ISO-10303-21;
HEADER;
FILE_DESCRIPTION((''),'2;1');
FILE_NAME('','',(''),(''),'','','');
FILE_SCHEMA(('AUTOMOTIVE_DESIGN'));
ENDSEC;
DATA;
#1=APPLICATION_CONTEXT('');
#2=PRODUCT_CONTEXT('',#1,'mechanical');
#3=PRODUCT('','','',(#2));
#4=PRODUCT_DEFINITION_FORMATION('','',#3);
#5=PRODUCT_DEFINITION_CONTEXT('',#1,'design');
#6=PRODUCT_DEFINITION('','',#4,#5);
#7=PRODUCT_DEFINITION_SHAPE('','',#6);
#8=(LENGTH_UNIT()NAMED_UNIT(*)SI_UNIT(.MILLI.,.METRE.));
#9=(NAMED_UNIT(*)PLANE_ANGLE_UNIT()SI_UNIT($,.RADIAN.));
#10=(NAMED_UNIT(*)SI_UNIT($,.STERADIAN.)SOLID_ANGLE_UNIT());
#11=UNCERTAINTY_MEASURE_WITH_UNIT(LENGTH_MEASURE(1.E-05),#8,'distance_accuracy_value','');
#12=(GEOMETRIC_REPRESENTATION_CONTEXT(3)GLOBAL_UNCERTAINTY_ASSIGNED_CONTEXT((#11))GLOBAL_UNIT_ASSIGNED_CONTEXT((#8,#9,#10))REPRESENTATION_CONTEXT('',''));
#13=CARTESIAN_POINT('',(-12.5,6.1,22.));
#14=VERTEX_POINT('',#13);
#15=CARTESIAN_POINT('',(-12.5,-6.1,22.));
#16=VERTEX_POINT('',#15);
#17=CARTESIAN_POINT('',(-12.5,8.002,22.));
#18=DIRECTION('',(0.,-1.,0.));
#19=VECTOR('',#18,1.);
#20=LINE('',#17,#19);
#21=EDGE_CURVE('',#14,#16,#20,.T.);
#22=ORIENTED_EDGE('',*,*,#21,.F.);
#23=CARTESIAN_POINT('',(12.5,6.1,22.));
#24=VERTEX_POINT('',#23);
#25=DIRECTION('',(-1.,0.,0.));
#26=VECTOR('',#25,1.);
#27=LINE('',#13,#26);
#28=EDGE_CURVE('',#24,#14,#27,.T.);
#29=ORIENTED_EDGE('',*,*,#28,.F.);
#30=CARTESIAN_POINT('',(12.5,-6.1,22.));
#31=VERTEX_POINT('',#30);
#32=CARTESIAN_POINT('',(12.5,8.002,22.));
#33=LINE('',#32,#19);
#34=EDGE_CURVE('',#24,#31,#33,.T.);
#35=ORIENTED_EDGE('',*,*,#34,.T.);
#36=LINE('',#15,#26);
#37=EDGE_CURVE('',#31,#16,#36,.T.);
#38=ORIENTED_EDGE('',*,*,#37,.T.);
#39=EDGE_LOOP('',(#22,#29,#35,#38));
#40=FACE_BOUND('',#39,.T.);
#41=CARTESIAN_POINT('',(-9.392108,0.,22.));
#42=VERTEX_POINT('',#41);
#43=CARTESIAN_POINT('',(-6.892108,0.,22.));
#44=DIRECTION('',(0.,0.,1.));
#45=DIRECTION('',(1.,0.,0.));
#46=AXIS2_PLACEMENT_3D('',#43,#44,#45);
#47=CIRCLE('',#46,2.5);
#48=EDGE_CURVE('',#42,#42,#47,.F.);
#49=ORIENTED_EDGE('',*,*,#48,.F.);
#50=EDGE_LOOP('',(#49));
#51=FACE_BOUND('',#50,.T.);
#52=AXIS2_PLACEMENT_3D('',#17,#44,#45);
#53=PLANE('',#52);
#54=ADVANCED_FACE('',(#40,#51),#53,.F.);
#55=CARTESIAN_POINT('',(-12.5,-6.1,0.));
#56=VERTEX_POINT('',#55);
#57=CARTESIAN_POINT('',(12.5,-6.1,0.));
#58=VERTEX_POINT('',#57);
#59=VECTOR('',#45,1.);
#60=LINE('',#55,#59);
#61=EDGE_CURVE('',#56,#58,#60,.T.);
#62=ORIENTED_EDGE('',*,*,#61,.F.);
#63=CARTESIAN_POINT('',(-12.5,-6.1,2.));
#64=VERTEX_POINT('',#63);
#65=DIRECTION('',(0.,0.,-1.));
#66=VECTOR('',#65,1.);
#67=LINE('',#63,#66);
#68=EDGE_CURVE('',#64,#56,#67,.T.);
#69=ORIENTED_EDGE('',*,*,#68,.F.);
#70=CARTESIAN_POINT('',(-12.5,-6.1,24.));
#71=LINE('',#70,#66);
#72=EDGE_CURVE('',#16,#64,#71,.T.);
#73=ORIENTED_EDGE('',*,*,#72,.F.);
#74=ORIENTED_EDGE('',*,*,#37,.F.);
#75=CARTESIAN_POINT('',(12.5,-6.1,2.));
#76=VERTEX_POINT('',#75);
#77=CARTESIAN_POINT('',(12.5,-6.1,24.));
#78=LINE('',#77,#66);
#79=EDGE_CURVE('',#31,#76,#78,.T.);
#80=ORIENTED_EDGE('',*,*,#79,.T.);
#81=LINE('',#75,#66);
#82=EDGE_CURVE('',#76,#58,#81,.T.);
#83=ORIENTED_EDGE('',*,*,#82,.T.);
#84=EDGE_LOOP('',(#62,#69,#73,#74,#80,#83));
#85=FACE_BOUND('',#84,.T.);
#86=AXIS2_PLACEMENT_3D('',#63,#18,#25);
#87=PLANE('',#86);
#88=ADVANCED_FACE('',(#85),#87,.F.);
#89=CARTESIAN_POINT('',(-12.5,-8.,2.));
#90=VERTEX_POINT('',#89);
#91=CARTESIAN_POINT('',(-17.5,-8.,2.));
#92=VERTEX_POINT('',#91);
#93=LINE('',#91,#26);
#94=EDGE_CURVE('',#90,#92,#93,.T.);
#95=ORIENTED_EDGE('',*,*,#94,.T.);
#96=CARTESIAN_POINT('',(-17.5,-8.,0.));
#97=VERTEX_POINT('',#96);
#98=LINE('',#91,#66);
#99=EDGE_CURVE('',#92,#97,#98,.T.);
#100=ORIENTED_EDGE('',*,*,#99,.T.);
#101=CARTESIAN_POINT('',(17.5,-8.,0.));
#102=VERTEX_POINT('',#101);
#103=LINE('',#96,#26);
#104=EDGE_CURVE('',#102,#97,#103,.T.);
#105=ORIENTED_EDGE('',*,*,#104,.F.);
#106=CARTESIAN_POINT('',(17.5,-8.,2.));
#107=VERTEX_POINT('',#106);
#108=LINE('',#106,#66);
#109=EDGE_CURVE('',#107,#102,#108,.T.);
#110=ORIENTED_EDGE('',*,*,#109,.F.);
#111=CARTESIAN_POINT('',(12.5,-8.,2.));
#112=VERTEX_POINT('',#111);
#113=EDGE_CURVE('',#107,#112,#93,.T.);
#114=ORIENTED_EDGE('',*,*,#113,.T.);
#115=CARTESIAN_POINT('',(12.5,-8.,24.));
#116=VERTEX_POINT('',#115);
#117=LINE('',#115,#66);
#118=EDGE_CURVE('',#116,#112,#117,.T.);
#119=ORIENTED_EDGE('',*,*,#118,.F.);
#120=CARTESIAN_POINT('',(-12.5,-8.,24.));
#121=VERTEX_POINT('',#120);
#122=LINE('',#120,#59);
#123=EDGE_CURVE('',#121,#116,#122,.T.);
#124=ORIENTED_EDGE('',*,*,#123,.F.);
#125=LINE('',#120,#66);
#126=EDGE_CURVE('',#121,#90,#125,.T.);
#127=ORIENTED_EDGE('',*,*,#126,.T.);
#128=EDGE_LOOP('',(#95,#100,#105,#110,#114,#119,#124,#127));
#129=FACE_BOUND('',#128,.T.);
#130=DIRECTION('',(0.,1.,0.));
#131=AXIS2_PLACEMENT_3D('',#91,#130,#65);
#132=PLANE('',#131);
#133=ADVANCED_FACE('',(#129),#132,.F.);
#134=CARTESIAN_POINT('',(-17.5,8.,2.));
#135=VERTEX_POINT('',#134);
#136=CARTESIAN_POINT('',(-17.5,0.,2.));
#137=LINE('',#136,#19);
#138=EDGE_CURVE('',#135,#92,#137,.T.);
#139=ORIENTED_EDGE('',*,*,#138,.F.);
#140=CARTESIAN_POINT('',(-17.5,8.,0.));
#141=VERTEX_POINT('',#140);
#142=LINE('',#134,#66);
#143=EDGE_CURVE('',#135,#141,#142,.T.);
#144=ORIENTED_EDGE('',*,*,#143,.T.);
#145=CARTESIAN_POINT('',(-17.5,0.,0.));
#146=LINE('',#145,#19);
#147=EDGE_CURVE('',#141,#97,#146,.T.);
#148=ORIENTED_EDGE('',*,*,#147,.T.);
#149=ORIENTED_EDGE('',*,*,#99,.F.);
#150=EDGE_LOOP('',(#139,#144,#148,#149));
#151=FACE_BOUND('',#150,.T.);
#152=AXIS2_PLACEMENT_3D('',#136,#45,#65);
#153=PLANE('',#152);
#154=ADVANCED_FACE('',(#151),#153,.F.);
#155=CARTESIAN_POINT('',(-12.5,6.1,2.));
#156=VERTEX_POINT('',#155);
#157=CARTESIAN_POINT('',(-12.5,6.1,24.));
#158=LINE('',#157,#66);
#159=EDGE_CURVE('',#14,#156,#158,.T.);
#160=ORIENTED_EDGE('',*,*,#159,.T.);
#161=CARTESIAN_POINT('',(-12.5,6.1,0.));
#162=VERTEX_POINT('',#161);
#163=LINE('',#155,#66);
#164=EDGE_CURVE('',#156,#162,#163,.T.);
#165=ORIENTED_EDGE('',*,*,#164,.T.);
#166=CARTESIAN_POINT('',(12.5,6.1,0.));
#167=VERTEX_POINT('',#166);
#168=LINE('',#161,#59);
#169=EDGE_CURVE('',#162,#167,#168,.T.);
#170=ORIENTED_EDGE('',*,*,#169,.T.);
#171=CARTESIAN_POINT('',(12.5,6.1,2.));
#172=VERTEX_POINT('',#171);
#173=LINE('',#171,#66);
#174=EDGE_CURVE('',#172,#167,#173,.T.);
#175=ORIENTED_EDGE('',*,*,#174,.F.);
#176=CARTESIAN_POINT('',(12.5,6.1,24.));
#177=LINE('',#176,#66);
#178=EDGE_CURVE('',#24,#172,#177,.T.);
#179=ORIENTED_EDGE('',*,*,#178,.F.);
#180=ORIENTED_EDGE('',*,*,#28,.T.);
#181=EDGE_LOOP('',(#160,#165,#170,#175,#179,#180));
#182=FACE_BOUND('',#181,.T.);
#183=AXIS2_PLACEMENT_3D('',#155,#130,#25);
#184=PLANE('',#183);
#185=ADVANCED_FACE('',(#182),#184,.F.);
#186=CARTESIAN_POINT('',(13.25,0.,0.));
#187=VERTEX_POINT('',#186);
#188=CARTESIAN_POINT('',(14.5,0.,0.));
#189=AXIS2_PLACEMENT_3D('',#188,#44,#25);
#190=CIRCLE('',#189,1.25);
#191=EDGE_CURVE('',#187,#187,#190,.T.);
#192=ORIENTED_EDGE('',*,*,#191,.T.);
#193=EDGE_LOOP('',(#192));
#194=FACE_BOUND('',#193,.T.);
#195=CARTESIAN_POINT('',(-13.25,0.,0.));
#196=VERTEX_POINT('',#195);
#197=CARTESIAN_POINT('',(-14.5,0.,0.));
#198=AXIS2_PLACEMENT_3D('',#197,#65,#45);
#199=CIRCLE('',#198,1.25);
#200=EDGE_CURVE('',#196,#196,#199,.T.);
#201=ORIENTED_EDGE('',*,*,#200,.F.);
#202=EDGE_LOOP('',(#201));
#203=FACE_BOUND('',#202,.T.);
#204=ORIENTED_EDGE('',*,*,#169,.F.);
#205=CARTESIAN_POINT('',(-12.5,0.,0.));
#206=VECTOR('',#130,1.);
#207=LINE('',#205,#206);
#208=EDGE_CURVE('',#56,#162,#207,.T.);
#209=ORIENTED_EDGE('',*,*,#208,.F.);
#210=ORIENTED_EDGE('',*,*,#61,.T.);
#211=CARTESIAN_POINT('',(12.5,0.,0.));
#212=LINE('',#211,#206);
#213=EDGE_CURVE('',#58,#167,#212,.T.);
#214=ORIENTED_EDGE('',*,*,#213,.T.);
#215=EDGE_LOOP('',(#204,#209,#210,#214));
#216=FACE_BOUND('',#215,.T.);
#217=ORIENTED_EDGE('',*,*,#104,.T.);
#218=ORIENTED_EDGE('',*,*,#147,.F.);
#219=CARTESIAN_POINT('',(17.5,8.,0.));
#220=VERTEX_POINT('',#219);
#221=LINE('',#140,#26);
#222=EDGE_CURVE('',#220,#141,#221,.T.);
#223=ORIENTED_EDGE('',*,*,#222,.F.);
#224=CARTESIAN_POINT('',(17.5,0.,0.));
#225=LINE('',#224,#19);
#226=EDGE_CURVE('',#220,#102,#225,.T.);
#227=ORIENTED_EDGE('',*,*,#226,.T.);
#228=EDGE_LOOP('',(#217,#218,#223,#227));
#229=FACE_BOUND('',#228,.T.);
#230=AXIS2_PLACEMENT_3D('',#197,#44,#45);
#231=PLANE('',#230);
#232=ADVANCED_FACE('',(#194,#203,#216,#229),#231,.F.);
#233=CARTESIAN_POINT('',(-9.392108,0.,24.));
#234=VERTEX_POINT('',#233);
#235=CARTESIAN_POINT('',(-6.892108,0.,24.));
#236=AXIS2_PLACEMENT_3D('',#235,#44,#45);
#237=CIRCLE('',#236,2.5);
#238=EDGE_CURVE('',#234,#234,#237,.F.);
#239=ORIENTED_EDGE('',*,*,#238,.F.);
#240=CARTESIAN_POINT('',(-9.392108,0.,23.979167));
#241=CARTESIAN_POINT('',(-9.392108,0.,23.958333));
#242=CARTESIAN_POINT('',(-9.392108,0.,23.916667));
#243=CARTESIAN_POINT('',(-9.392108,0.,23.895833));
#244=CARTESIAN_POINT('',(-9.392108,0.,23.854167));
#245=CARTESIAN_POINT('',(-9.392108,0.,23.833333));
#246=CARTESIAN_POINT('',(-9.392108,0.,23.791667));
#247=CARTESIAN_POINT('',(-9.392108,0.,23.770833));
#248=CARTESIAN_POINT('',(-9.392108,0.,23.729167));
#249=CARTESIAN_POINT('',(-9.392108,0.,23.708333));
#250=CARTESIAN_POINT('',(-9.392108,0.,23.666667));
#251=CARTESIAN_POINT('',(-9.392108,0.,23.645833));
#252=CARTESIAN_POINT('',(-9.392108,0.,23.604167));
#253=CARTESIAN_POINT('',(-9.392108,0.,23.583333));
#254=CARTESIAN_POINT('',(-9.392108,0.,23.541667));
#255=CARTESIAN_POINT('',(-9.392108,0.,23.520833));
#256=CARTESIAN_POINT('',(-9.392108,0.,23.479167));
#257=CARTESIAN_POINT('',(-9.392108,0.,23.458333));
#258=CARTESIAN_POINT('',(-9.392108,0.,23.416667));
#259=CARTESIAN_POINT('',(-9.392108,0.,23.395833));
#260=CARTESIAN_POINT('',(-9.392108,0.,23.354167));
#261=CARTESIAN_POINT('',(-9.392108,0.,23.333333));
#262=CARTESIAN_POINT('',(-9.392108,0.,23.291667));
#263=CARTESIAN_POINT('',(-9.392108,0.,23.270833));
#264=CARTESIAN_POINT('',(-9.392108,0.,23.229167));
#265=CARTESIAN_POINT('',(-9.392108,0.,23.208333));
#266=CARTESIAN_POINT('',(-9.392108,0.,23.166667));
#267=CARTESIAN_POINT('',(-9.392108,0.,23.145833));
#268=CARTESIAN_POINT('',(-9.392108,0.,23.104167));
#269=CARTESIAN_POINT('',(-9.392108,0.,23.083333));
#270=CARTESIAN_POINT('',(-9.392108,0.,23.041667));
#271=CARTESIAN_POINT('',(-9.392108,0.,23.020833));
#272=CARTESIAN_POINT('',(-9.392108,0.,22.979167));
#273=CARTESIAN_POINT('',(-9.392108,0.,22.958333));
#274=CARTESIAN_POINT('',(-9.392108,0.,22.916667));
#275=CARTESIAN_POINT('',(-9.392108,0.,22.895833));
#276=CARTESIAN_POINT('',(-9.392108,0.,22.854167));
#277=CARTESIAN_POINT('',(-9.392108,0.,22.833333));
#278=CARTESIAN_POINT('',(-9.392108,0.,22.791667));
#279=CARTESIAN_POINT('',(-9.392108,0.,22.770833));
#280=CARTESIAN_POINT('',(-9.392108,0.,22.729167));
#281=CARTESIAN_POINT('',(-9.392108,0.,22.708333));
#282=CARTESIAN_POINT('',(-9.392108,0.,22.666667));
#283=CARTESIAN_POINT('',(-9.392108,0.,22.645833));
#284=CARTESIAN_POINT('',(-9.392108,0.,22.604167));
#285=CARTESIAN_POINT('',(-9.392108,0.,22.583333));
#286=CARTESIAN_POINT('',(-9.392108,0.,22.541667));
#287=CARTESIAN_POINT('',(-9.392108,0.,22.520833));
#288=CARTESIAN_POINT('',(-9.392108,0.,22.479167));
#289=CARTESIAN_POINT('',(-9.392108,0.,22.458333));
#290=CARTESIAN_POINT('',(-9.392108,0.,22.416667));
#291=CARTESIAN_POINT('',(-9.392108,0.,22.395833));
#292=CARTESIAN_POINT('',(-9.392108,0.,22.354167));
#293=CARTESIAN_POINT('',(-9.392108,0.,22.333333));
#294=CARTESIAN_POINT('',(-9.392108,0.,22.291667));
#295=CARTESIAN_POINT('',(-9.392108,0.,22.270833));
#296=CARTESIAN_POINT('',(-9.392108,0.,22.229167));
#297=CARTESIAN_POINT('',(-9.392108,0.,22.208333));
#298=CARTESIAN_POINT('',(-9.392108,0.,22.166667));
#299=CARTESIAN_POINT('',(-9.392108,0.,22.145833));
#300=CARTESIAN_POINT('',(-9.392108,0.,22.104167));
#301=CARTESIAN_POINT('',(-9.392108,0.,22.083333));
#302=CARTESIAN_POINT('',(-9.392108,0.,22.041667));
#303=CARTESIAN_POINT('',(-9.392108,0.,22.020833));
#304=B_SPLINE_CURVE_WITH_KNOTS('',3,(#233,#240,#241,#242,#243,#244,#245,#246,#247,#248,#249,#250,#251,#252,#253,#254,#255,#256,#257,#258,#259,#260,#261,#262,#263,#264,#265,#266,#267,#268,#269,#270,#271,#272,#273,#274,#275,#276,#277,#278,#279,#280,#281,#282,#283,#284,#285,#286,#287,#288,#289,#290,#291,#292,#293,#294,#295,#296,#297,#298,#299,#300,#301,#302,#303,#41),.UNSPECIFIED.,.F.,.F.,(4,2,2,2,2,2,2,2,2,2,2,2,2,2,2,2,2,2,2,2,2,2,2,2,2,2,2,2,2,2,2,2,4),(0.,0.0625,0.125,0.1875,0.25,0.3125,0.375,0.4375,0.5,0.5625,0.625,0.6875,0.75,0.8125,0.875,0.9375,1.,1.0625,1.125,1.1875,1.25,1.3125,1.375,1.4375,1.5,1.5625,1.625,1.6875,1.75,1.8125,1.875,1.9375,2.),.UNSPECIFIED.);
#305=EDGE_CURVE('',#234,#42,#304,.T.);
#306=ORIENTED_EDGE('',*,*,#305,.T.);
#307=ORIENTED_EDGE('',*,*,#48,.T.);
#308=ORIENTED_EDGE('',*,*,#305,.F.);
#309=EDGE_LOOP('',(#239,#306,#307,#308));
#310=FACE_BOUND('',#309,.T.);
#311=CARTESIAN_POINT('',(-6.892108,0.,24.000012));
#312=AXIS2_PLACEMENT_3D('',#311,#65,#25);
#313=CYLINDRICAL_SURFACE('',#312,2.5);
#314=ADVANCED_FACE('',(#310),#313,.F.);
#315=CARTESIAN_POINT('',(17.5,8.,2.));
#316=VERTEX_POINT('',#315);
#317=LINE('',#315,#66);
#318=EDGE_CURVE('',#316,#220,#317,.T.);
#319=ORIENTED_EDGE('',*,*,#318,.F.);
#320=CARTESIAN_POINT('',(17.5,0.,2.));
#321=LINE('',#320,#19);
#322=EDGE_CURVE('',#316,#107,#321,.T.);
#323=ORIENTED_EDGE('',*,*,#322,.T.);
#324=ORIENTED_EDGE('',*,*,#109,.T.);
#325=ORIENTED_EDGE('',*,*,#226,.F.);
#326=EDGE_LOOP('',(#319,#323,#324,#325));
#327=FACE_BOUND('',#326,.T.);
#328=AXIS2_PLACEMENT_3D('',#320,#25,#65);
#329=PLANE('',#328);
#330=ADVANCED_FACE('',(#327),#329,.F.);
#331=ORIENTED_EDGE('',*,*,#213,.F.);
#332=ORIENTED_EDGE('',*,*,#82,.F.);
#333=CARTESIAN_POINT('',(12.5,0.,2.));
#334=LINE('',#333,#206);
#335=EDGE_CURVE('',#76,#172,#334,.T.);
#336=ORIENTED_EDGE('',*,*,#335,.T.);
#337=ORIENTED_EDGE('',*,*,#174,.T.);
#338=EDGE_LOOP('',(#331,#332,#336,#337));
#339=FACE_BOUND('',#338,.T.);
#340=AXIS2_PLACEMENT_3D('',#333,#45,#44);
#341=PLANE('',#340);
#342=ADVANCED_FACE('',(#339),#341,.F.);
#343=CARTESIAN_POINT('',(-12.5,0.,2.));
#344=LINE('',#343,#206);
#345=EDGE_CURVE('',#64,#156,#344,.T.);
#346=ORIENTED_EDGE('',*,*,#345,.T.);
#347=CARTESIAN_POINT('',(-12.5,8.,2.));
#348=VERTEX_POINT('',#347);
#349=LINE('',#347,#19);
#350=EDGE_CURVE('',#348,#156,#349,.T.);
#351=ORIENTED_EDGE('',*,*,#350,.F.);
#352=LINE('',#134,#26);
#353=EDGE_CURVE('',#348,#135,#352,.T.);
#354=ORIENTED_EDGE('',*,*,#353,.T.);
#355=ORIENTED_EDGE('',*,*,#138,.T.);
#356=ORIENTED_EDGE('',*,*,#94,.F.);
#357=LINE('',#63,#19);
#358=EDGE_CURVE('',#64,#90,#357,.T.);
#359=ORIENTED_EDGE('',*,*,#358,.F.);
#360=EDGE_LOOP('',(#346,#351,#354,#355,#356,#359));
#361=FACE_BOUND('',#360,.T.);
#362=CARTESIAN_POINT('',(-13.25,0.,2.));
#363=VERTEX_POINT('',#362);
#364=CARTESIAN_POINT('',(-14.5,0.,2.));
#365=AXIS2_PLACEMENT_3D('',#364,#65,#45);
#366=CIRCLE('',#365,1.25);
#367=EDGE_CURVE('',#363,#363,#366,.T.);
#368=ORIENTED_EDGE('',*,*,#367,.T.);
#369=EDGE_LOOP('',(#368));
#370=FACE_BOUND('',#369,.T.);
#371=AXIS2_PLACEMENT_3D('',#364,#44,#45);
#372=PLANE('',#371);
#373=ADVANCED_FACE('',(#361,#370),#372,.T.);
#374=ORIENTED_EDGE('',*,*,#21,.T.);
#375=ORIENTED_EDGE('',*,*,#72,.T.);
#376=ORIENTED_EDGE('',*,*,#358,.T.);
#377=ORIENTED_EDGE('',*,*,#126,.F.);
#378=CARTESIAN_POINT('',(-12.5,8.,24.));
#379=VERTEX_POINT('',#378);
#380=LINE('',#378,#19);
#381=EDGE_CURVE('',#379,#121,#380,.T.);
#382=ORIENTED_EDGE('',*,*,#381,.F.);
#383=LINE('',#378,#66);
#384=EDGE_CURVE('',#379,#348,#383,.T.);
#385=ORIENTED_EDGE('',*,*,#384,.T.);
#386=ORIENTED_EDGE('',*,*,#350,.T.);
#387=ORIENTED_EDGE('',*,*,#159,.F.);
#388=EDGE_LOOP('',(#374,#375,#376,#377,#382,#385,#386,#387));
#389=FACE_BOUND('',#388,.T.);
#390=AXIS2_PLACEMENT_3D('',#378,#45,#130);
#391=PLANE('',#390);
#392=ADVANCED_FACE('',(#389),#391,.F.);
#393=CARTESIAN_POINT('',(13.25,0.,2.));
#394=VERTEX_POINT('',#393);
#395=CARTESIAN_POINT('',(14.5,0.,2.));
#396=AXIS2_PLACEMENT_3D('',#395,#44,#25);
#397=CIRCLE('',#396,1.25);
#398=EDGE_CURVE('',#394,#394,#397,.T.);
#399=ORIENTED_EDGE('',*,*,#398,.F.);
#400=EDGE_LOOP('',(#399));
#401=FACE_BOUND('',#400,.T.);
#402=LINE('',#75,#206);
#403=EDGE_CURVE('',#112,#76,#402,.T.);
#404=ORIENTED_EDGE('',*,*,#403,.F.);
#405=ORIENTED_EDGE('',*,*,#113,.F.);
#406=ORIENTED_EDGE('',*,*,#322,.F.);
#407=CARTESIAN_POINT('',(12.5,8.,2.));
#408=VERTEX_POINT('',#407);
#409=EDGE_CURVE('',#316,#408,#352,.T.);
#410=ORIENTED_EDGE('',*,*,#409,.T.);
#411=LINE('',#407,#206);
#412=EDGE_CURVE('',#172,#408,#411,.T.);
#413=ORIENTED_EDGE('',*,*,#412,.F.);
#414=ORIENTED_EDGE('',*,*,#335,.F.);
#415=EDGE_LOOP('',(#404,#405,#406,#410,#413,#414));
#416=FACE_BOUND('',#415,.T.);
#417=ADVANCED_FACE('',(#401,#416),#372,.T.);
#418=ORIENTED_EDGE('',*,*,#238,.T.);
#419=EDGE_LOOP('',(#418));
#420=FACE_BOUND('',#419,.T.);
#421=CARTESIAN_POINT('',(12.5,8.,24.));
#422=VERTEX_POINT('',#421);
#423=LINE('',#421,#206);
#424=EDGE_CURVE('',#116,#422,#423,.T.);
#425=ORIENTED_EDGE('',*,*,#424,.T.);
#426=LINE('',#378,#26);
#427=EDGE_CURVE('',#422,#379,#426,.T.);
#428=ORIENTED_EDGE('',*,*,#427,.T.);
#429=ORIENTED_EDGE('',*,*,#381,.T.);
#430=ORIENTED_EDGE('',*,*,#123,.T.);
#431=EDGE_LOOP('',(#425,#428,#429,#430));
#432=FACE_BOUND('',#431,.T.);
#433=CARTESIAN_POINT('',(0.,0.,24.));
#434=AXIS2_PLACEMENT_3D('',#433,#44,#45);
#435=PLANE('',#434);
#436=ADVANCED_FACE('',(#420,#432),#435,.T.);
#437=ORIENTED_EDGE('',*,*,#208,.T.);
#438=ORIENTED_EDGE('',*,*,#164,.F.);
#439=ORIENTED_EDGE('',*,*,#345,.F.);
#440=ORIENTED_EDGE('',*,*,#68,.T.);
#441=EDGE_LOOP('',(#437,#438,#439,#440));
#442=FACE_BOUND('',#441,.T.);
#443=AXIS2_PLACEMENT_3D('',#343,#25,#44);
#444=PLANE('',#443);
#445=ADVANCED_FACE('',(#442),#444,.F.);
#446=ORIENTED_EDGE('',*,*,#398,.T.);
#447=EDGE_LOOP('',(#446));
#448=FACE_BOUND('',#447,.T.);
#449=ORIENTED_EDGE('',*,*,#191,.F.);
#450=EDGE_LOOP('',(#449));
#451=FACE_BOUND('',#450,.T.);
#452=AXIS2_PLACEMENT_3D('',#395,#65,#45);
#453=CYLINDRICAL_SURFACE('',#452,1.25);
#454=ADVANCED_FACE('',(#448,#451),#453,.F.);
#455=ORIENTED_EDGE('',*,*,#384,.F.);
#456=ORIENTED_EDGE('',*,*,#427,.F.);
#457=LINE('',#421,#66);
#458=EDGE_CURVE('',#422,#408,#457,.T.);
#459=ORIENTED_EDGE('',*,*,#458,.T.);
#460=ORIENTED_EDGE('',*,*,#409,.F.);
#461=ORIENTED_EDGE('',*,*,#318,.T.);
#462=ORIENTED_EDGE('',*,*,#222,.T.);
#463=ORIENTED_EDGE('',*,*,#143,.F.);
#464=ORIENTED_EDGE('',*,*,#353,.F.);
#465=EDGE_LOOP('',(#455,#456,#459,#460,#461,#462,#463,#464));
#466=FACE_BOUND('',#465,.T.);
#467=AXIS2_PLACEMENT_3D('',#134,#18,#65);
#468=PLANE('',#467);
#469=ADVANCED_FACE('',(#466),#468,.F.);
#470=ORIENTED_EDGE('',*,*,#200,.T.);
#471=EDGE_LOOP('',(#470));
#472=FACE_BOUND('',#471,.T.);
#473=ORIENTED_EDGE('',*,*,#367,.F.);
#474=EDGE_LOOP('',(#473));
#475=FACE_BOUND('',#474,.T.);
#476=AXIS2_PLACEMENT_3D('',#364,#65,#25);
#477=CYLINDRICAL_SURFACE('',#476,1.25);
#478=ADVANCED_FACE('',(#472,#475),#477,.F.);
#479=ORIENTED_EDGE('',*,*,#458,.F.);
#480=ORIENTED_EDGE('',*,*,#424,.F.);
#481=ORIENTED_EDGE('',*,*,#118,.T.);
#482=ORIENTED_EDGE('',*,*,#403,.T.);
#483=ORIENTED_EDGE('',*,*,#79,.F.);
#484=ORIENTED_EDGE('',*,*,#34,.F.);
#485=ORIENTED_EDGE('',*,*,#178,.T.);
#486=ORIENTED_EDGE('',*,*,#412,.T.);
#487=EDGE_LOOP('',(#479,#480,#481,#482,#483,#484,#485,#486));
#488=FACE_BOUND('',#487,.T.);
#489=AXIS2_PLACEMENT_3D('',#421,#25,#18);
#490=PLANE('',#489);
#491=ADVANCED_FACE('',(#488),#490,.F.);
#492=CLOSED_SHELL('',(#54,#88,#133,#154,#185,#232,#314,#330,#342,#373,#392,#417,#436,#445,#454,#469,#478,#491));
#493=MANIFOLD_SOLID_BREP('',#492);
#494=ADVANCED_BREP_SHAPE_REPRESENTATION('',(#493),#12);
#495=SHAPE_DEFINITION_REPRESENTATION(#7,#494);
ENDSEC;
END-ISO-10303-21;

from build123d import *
from build123d.topology import SkipClean

# Parameters (mm, degrees)
BOSS_EXTRUDE1_DEPTH     = 2
MIRROR1_OUTLINE_R       = 1.25
MIRROR1_DEPTH           = 2
SKETCH2_W               = 25
SKETCH2_H               = 1.9
BOSS_EXTRUDE2_DEPTH     = 22
BOSS_EXTRUDE3_REACH     = 34.879
SKETCH3_W               = 25
SKETCH3_H               = 2
CUT_EXTRUDE1_DEPTH      = 31.761176831
CUT_EXTRUDE1_DEPTH_BACK = 3
SKETCH4_R               = 2.5


# Read off the part's stored shape, not the designer's step: Mirror1
with BuildPart() as part:
    # Sketch1 → Boss-Extrude1 (new body)
    with BuildSketch(Plane.XY):
        with BuildLine():
            Line((-17.5, 8), (0, 8))
            Line((0, 8), (0, 6.1))
            Line((0, 6.1), (-12.5, 6.1))
            Line((-12.5, 6.1), (-12.5, 0))
            Line((-12.5, 0), (-13.25, 0))
            ThreePointArc((-13.25, 0), (-14.5, 1.25), (-15.75, 0))
            Line((-15.75, 0), (-17.5, 0))
            Line((-17.5, 0), (-17.5, 8))
        make_face()
    extrude(amount=BOSS_EXTRUDE1_DEPTH)

    # Mirror1 outline → Mirror1 (add)
    with SkipClean():  # the faces are left unmerged after this step: merging them gives an invalid solid
        with BuildSketch(Plane.XY):
            with BuildLine():
                Line((17.5, 8), (0, 8))
                Line((0, 8), (0, 6.1))
                Line((0, 6.1), (12.5, 6.1))
                Line((12.5, 6.1), (12.5, -6.1))
                Line((12.5, -6.1), (-12.5, -6.1))
                Line((-12.5, -6.1), (-12.5, 0))
                Line((-12.5, 0), (-13.25, 0))
                ThreePointArc((-13.25, 0), (-14.5, -1.25), (-15.75, 0))
                Line((-15.75, 0), (-17.5, 0))
                Line((-17.5, 0), (-17.5, -8))
                Line((-17.5, -8), (17.5, -8))
                Line((17.5, -8), (17.5, 8))
            make_face()
            with Locations((14.5, 0)):
                Circle(MIRROR1_OUTLINE_R, mode=Mode.SUBTRACT)
        extrude(amount=MIRROR1_DEPTH)
    add(part.part.scale(1), mode=Mode.REPLACE)  # the faces are merged on a copy

    # Sketch2 → Boss-Extrude2 (add)
    with BuildSketch(Plane.XY.offset(2)):
        with Locations((0, 7.05)):
            Rectangle(SKETCH2_W, SKETCH2_H)
        with Locations((0, -7.05)):
            Rectangle(SKETCH2_W, SKETCH2_H)
    extrude(amount=BOSS_EXTRUDE2_DEPTH)

    # Sketch3 → Boss-Extrude3 (add, up to next)
    with BuildSketch(Plane(origin=(0, -6.1, 0), x_dir=(1, 0, 0), z_dir=(0, 1, 0)), mode=Mode.PRIVATE) as boss_extrude3_sk1:
        with Locations((0, -23)):
            Rectangle(SKETCH3_W, SKETCH3_H)
    boss_extrude3_tool1 = extrude(boss_extrude3_sk1.sketch, amount=BOSS_EXTRUDE3_REACH, mode=Mode.PRIVATE) - part.part
    add(boss_extrude3_tool1.solids().sort_by_distance((0, -6.1, 23))[0])

    # Sketch4 → Cut-Extrude1 (cut, two sides: drawn at the far end of the back side and taken through both)
    with BuildSketch(Plane.XY.offset(24).offset(-CUT_EXTRUDE1_DEPTH_BACK)):
        with Locations(Location((-6.892107872, 0, 0), (0, 0, 180))):
            Circle(SKETCH4_R)
    extrude(amount=CUT_EXTRUDE1_DEPTH + CUT_EXTRUDE1_DEPTH_BACK, mode=Mode.SUBTRACT)


solid = part.part
